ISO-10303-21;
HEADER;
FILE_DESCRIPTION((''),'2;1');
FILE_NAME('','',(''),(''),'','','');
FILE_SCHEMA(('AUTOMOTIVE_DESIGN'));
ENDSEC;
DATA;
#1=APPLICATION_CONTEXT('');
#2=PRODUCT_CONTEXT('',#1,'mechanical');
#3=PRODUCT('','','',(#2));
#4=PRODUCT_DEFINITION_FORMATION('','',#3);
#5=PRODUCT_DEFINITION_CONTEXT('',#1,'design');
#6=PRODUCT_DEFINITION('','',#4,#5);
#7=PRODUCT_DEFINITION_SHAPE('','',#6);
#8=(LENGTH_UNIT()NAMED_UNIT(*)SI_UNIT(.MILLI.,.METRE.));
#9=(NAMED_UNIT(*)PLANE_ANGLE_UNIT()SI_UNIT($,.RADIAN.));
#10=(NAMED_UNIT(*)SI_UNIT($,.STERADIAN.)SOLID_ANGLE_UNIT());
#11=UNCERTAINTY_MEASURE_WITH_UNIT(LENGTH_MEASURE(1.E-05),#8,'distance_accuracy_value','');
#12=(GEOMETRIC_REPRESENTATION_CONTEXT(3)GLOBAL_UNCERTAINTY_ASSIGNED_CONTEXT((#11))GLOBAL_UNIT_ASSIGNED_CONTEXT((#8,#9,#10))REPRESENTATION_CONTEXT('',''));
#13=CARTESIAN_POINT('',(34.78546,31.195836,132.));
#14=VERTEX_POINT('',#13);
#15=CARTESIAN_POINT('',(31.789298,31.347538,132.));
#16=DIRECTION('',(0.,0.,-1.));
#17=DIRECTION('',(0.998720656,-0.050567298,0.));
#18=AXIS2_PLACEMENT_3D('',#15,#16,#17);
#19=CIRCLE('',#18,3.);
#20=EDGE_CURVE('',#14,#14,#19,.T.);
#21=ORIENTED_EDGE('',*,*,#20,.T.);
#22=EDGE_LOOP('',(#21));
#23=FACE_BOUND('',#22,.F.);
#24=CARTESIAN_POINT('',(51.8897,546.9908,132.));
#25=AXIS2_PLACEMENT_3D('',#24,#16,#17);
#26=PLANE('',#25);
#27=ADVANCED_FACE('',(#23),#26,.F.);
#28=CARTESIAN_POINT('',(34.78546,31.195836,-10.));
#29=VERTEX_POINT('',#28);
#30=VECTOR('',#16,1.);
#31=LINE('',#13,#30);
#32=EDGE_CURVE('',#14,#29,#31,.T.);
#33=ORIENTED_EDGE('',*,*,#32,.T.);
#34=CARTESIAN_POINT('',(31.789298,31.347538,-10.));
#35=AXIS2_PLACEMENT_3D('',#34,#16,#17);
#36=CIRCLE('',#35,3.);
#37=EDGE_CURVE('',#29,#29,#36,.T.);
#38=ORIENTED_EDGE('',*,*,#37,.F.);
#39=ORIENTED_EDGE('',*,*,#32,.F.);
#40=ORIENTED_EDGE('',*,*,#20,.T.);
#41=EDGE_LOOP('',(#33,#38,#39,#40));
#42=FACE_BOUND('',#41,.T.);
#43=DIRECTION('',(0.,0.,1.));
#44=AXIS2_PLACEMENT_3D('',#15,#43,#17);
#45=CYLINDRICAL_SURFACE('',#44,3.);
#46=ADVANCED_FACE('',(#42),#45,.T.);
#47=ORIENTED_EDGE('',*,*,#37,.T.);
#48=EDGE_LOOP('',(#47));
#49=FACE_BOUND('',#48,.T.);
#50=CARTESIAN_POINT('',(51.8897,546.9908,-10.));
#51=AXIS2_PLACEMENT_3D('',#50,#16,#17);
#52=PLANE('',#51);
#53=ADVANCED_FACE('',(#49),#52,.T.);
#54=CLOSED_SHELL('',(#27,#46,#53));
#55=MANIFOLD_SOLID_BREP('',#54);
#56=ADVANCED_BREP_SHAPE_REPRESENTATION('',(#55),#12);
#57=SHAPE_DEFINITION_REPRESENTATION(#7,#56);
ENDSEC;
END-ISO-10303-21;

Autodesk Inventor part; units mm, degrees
ref_plane "YZ Plane" through (0, 0, 0) normal (1, 0, 0) x (0, 1, 0)
ref_plane "XZ Plane" through (0, 0, 0) normal (0, 1, 0) x (-1, 0, 0)
ref_plane "XY Plane" through (0, 0, 0) normal (0, 0, 1) x (1, 0, 0)
ref_plane "Work Plane1" through (51.8897, 546.9908, 132) normal (0, 0, -1) x (0.9987207, -0.0505673, 0)
sketch "Sketch1" plane through (51.8897, 546.9908, 132) normal (0, 0, -1) x (0.9987207, -0.0505673, 0)
  circle A0 centre (6, 516) radius 3
  point P0 (-24.1635, 548.9149)
  dimension "d0" = 6
extrude "Extrusion1" add sketch "Sketch1" along normal blind 142
properties part number "eje codo"
